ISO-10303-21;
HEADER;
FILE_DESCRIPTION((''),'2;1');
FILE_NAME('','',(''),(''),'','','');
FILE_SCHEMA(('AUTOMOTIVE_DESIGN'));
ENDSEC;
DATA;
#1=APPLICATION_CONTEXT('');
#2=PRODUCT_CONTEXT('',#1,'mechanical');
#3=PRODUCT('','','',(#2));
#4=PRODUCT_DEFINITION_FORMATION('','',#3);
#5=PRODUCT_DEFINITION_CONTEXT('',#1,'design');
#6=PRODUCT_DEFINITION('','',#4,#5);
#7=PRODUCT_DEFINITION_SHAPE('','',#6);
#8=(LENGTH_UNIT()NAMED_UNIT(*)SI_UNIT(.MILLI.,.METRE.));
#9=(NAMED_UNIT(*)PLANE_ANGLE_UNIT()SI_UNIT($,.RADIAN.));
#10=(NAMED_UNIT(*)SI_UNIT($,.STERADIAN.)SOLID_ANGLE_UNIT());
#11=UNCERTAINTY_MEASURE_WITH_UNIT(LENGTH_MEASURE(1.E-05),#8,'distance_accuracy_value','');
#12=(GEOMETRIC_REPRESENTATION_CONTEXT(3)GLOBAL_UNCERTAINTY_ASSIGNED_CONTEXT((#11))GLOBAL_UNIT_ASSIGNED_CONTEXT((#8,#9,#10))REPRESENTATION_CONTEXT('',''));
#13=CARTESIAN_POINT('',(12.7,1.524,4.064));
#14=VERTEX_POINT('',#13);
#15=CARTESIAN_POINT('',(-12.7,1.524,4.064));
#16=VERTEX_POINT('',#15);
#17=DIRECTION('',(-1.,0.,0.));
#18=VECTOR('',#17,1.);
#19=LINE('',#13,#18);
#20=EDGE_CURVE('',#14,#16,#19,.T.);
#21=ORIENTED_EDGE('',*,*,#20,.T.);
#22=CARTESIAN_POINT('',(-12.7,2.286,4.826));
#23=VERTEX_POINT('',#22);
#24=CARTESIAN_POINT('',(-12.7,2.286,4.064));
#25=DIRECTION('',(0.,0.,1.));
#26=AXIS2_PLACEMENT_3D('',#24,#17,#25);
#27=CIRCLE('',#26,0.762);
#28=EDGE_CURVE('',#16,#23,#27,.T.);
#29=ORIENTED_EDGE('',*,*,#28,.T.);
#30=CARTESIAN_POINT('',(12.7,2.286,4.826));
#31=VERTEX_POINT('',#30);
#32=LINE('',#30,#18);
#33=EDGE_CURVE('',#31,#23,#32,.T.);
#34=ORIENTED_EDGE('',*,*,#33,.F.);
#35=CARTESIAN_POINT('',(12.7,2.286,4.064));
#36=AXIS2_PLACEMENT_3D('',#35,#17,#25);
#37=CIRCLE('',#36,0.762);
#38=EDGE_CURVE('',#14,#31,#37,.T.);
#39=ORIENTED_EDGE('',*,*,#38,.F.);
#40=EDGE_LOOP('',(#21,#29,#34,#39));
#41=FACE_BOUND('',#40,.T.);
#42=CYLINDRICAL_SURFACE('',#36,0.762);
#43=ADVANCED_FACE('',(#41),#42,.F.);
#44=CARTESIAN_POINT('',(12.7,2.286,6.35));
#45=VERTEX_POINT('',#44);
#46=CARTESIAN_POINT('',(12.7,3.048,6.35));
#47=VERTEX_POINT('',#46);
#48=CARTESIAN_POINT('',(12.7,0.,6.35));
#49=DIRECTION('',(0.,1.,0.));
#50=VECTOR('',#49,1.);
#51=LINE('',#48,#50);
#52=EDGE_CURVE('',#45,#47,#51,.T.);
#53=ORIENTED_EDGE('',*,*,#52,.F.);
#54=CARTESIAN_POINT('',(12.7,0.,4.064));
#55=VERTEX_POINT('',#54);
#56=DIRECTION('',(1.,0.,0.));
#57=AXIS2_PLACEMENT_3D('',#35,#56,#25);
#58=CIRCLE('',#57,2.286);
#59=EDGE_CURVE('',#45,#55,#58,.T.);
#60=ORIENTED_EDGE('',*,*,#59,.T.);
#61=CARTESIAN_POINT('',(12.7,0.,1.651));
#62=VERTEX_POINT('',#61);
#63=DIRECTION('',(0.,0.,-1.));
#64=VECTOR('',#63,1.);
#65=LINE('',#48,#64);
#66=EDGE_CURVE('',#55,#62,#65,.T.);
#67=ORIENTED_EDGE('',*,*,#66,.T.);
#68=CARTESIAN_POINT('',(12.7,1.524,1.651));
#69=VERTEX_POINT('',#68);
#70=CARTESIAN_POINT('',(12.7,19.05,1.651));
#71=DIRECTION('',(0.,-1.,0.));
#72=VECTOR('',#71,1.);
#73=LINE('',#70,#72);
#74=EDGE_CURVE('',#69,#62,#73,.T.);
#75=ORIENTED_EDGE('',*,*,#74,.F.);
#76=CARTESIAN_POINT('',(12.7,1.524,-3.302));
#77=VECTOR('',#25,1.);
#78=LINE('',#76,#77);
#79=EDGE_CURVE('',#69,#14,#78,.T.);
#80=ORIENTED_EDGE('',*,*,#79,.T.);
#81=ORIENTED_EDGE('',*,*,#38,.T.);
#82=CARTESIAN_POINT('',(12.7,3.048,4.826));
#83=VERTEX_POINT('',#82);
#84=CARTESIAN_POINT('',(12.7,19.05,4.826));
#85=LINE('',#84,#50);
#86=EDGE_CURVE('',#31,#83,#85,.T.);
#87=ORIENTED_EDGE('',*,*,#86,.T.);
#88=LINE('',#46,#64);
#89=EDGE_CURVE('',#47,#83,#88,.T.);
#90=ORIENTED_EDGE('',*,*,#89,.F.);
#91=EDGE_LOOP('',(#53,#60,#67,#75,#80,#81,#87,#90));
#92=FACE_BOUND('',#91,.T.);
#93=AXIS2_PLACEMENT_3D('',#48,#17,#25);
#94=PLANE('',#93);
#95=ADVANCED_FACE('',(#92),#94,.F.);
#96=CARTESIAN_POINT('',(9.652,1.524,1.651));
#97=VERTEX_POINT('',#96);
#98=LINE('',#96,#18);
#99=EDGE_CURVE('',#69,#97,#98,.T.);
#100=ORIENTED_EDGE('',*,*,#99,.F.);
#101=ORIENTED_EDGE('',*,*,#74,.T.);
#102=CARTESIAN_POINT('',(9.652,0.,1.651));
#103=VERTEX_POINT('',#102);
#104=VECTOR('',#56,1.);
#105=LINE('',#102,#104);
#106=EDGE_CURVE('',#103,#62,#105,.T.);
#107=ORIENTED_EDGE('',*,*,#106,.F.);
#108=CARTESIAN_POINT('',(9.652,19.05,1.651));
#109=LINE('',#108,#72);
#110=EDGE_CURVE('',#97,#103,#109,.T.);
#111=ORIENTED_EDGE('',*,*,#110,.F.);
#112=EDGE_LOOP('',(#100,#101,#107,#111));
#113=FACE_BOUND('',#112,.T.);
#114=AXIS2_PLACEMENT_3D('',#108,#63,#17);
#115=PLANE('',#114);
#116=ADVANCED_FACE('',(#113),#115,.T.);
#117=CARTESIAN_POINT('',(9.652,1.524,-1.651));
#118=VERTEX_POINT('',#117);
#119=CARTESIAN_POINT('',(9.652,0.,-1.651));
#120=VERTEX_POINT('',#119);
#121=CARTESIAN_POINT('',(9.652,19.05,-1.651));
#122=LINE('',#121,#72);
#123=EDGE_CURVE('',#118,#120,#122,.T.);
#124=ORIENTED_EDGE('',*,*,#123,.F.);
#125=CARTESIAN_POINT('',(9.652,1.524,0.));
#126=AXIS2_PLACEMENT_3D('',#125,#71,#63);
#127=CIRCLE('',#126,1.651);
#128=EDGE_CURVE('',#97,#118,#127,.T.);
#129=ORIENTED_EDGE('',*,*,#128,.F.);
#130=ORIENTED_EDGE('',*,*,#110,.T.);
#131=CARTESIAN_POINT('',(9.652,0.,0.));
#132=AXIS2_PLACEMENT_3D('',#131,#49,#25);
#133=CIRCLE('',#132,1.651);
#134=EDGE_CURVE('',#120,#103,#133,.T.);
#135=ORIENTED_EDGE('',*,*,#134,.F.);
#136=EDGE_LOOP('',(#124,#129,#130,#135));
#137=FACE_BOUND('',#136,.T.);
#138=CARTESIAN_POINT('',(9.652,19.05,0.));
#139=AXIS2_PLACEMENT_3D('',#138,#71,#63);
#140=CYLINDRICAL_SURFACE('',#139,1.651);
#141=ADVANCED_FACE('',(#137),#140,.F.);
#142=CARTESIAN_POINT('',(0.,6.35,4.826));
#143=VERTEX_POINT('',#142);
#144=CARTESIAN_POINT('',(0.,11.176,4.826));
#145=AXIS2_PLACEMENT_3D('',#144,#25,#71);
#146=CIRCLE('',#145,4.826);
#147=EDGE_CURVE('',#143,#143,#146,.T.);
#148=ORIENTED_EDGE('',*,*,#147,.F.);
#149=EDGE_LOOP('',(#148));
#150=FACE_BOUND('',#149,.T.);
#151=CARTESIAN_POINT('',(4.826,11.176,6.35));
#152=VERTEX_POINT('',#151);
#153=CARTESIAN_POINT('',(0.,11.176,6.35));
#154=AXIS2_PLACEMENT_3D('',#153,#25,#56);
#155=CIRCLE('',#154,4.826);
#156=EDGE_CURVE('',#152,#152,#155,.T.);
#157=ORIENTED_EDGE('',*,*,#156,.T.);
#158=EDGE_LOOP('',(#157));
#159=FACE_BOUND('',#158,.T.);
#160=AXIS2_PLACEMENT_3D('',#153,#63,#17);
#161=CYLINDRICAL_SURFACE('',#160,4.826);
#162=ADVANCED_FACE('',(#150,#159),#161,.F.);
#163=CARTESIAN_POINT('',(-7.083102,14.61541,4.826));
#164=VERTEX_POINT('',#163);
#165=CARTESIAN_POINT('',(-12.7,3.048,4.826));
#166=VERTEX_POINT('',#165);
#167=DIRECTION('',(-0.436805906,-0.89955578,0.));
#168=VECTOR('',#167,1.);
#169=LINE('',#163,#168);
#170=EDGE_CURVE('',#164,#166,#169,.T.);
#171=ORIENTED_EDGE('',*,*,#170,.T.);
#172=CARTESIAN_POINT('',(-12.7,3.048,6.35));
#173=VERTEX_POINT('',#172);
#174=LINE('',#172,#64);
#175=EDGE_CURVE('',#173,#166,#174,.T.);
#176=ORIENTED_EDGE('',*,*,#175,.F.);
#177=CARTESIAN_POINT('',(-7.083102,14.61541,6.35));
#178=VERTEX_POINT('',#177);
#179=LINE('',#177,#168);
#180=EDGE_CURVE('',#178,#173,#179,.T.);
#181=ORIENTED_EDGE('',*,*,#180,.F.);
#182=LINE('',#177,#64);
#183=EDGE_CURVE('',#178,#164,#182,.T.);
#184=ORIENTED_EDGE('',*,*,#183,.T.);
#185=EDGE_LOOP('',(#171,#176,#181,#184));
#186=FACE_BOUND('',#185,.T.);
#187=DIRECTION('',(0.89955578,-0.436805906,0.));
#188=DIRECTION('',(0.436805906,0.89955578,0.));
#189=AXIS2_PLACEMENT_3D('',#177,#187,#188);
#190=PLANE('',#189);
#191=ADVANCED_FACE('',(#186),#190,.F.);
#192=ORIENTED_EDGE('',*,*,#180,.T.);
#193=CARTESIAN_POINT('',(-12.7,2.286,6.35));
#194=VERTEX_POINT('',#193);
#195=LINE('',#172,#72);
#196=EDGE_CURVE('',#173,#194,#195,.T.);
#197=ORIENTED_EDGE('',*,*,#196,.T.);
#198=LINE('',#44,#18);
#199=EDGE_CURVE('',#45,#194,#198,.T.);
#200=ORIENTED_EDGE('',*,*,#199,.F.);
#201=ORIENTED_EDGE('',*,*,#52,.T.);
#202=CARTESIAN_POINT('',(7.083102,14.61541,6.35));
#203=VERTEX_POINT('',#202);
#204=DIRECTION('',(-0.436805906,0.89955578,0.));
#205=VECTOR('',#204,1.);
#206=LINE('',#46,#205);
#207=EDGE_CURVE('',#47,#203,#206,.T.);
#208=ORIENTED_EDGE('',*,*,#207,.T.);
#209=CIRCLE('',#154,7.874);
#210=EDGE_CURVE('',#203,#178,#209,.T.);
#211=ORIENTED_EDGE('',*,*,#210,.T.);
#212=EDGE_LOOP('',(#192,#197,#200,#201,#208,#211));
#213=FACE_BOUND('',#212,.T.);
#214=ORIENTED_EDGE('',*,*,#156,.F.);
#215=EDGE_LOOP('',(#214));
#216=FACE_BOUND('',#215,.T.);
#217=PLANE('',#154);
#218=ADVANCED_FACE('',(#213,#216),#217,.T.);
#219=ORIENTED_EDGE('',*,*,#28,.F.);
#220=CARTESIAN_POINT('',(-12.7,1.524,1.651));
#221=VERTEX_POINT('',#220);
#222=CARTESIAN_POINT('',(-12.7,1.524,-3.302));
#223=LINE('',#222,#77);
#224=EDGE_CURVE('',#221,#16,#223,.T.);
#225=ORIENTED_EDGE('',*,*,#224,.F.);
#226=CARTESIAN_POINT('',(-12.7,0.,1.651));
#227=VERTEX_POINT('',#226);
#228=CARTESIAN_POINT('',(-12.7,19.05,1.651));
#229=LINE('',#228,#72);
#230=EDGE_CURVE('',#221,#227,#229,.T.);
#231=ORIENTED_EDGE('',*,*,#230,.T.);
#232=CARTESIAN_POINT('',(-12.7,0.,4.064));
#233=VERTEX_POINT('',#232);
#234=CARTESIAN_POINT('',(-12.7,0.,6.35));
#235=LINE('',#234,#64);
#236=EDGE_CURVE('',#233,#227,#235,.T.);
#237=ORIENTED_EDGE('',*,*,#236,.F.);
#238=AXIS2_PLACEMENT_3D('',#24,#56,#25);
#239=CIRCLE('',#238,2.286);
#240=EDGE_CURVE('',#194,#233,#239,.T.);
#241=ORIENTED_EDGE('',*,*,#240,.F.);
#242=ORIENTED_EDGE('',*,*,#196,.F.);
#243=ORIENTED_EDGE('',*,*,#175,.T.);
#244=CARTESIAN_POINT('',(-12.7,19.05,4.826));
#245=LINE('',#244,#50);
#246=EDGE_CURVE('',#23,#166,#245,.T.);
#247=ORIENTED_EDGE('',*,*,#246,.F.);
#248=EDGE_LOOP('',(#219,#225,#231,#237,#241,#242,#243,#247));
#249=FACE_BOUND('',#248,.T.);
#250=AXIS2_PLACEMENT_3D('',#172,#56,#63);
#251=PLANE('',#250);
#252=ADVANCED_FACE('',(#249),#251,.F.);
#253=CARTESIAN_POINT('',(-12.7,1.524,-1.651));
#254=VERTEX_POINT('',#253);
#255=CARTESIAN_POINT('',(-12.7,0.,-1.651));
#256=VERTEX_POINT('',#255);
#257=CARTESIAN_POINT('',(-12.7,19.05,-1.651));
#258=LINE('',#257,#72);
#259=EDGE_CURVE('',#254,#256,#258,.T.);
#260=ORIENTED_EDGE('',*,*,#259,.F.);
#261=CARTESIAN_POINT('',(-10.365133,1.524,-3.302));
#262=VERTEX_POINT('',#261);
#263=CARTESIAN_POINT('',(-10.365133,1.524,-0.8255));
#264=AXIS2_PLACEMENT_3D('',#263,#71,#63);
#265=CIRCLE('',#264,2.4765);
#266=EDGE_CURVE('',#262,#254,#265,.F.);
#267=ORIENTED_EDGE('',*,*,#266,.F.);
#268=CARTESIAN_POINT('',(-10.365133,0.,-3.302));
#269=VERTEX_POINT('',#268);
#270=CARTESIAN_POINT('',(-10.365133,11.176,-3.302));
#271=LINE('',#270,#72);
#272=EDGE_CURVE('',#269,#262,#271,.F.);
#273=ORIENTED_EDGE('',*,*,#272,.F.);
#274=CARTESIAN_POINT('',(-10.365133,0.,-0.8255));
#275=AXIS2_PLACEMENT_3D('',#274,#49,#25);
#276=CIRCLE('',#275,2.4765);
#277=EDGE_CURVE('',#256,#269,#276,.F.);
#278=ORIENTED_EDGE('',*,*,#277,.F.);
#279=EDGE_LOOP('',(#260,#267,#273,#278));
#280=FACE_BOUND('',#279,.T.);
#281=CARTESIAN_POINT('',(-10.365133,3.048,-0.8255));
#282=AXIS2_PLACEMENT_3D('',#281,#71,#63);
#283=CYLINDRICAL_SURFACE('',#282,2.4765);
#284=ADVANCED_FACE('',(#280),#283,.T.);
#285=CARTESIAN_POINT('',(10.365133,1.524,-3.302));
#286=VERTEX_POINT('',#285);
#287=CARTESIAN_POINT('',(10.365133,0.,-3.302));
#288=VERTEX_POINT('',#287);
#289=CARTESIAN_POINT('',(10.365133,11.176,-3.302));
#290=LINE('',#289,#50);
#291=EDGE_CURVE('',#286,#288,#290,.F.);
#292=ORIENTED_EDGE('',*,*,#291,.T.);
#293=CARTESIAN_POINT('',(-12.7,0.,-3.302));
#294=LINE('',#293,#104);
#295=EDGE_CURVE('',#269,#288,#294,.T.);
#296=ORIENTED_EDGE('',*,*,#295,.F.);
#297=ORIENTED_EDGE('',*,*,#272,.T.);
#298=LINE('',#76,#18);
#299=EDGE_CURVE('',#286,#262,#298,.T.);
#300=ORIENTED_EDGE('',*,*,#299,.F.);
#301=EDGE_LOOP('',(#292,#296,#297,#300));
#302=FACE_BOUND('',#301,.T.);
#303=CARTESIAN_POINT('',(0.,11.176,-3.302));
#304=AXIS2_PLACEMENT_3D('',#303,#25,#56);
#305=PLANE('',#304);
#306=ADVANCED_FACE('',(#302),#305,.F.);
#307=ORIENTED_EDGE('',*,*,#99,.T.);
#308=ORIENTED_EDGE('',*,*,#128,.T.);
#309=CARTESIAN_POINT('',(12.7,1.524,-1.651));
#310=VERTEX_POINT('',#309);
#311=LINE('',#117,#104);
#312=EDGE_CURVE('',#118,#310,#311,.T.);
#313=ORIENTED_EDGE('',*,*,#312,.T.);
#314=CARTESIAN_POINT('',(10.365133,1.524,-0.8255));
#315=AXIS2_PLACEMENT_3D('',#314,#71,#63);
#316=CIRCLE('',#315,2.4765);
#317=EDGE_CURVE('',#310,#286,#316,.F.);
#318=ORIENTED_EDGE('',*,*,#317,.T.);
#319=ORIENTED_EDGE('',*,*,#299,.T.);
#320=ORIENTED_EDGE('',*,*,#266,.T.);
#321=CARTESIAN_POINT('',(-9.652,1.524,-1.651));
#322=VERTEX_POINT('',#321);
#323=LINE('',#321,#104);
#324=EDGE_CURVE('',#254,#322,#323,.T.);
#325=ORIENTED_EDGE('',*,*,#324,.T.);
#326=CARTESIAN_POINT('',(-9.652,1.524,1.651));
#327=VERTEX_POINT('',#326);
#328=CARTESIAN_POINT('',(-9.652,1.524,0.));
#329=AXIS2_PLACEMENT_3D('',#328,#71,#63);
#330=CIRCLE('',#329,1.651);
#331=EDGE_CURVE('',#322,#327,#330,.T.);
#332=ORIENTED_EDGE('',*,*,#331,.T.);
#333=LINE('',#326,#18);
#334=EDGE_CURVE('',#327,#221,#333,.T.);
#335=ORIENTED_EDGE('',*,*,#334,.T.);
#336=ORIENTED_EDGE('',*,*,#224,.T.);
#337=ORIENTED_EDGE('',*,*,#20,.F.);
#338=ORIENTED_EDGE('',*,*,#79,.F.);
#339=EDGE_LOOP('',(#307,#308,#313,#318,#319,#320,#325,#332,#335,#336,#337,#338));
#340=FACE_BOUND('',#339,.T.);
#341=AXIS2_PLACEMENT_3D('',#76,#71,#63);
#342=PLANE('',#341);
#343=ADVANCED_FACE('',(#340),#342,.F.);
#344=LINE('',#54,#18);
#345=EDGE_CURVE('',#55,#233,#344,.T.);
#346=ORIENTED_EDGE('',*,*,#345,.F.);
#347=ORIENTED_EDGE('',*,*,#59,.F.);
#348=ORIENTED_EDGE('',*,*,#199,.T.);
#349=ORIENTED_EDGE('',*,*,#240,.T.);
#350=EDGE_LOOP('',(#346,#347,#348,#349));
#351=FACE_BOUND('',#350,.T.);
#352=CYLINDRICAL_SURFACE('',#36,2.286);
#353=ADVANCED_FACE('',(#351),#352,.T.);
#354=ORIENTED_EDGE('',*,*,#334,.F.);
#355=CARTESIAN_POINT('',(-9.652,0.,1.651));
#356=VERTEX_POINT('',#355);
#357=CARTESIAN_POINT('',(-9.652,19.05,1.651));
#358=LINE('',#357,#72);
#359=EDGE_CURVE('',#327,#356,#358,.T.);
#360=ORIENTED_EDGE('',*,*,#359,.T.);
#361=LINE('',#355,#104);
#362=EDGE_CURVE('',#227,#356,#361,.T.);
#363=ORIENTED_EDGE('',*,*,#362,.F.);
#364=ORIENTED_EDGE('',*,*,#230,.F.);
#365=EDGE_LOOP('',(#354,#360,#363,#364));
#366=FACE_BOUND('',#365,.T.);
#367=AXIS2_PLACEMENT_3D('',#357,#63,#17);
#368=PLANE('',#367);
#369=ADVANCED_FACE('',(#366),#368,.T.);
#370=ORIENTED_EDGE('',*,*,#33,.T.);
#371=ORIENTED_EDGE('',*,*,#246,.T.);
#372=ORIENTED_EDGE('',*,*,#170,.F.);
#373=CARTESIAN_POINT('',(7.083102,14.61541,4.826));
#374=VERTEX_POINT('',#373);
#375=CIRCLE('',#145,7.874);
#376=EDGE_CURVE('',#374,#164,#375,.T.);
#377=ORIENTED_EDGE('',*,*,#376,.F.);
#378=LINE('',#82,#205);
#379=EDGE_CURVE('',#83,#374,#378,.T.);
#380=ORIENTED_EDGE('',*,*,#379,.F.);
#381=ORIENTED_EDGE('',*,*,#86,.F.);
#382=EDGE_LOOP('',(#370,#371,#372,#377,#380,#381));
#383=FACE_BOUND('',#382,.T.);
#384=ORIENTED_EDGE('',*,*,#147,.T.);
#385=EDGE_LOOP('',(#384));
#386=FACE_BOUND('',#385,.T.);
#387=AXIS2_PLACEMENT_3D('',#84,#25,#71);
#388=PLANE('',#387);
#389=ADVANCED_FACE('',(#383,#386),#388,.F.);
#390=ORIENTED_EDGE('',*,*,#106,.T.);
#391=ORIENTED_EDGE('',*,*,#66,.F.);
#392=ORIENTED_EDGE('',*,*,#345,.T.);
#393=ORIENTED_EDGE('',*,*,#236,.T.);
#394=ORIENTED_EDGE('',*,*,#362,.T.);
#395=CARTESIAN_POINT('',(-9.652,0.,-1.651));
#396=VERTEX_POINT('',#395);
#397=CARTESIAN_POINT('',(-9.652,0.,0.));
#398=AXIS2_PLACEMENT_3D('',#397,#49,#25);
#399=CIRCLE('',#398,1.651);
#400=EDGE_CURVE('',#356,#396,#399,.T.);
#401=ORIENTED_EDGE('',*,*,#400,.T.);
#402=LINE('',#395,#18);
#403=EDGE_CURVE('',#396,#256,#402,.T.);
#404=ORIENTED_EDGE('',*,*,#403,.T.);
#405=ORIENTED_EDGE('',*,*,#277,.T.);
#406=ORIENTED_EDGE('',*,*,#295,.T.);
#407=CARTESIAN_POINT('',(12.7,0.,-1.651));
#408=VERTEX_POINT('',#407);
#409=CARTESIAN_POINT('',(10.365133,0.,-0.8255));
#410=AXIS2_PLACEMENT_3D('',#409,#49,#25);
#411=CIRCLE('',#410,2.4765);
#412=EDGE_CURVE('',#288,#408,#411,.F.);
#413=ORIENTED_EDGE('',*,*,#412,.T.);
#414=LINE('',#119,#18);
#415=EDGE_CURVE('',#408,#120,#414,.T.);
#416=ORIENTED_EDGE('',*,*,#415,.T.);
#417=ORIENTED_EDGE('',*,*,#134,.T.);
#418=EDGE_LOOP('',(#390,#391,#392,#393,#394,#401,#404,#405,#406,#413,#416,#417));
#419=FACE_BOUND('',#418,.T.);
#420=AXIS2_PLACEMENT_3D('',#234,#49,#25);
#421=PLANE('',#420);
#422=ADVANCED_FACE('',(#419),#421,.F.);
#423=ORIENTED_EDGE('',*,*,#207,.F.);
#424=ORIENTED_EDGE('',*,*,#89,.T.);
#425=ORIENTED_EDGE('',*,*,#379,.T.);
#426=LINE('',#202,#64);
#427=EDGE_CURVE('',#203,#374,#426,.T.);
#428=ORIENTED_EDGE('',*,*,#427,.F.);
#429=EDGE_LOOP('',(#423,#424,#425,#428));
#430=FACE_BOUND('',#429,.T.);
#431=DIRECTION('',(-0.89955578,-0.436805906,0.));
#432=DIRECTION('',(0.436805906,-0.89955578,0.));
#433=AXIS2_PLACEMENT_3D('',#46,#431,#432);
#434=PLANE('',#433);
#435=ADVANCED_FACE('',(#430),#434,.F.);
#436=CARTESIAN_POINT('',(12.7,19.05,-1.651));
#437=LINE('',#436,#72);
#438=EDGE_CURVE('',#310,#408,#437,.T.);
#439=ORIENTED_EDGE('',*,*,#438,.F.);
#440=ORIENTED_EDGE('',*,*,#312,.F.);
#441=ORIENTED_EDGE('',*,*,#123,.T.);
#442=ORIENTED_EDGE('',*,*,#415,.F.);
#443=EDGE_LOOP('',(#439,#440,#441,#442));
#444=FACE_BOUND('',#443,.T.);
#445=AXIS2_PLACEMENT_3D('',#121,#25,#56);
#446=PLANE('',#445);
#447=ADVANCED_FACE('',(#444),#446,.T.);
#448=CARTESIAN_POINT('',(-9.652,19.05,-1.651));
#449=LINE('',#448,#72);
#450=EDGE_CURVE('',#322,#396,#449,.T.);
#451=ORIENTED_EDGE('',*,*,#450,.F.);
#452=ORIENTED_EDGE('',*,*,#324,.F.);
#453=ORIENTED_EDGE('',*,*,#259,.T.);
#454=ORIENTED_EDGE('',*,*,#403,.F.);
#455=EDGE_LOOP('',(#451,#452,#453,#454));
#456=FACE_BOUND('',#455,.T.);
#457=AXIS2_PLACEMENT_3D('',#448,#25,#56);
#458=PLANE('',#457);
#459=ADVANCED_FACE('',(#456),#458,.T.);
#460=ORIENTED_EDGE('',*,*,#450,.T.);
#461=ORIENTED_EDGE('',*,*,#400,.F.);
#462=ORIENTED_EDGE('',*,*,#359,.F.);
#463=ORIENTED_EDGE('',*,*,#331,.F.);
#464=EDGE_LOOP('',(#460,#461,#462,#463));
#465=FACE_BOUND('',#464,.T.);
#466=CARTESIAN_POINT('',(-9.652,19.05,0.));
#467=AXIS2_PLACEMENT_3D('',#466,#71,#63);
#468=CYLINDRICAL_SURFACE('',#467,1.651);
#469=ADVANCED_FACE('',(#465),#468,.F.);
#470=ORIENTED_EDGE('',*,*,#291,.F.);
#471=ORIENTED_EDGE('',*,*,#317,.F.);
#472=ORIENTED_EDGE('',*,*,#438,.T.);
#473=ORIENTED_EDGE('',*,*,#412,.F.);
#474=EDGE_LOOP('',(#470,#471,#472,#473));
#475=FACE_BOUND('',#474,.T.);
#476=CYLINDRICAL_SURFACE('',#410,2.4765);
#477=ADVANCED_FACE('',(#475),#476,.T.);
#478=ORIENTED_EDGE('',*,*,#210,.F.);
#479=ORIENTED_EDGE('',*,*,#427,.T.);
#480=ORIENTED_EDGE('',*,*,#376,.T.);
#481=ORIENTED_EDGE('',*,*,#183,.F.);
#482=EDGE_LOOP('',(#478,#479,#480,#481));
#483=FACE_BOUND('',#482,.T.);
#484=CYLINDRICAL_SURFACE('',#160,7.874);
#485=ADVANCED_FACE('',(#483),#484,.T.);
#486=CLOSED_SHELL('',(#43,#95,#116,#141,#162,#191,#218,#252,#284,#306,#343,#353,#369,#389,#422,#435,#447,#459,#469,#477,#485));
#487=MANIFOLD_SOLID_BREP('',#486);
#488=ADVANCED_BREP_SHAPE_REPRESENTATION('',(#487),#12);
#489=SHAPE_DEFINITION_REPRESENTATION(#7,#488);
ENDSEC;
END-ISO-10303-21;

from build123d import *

# Parameters (mm, degrees)
BOSS_EXTRUDE1_DEPTH      = 6.35
BOSS_EXTRUDE1_DEPTH_BACK = 3.302
SKETCH3_R                = 4.826
CUT_EXTRUDE1_DEPTH       = 24.759524406
CUT_EXTRUDE2_DEPTH       = 33.378773911
FILLET1_R                = 2.4765


with BuildPart() as part:
    # Sketch3 → Boss-Extrude1 (new, two sides: drawn at the far end of the back side and taken through both)
    with BuildSketch(Plane.XY.offset(-BOSS_EXTRUDE1_DEPTH_BACK)):
        with BuildLine():
            Line((-12.7, 0), (12.7, 0))
            Line((12.7, 0), (12.7, 3.048))
            Line((12.7, 3.048), (7.083102209, 14.615409702))
            ThreePointArc((7.083102209, 14.615409702), (0, 19.05), (-7.083102209, 14.615409702))
            Line((-7.083102209, 14.615409702), (-12.7, 3.048))
            Line((-12.7, 3.048), (-12.7, 0))
        make_face()
        with Locations((0, 11.176)):
            Circle(SKETCH3_R, mode=Mode.SUBTRACT)
    extrude(amount=BOSS_EXTRUDE1_DEPTH + BOSS_EXTRUDE1_DEPTH_BACK)

    # Sketch4 → Cut-Extrude1 (cut, through all)
    with BuildSketch(Plane(origin=(0, 0, 0), x_dir=(1, 0, 0), z_dir=(0, 1, 0))):
        with BuildLine():
            Line((-12.7, 1.651), (-12.7, -1.651))
            Line((-12.7, -1.651), (-9.652, -1.651))
            ThreePointArc((-9.652, -1.651), (-8.001, 0), (-9.652, 1.651))
            Line((-9.652, 1.651), (-12.7, 1.651))
        make_face()
        with BuildLine():
            Line((9.652, 1.651), (12.7, 1.651))
            Line((12.7, 1.651), (12.7, -1.651))
            Line((12.7, -1.651), (9.652, -1.651))
            ThreePointArc((9.652, -1.651), (8.001, 0), (9.652, 1.651))
        make_face()
    extrude(amount=CUT_EXTRUDE1_DEPTH, mode=Mode.SUBTRACT)

    # Sketch5 → Cut-Extrude2 (cut, through all)
    with BuildSketch(Plane.ZY.offset(12.7)):
        with BuildLine():
            Line((-3.302, 19.05), (4.826, 19.05))
            Line((4.826, 19.05), (4.826, 2.286))
            ThreePointArc((4.826, 2.286), (4.602815367, 1.747184633), (4.064, 1.524))
            Line((4.064, 1.524), (-3.302, 1.524))
            Line((-3.302, 1.524), (-3.302, 19.05))
        make_face()
        with BuildLine():
            Line((4.064, 0), (6.35, 0))
            Line((6.35, 0), (6.35, 2.286))
            ThreePointArc((6.35, 2.286), (5.680446102, 0.669553898), (4.064, 0))
        make_face()
    extrude(amount=-CUT_EXTRUDE2_DEPTH, mode=Mode.SUBTRACT)

    # Fillet1
    # the kernel refuses this fillet: 2.4765 mm, written as the material it takes off along each edge
    with BuildSketch(Plane(origin=(-12.7, 7.361166479, -3.302), x_dir=(1, 0, 0), z_dir=(0, -1, 0))) as fillet1_piece_1:
        with BuildLine():
            CenterArc((2.334866591, 2.4765), FILLET1_R, 199.471220634, 70.528779366)
            Line((0, 1.651), (-0.046697332, 1.63449))
            ThreePointArc((-0.046697332, 1.63449), (-0.04953, 0.8255), (-0.04953, 0))
            Line((-0.04953, 0), (0, -0.04953))
            Line((0, -0.04953), (2.334866591, -0.04953))
            Line((2.334866591, -0.04953), (2.334866591, 0))
        make_face()
    extrude(amount=13.198332957, mode=Mode.SUBTRACT)
    with BuildSketch(Plane(origin=(12.7, -5.837166479, -3.302), x_dir=(0, 0, 1), z_dir=(0, 1, 0))) as fillet1_piece_2:
        with BuildLine():
            CenterArc((2.4765, -2.334866591), FILLET1_R, 109.471220634, 70.528779366)
            Line((0, -2.334866591), (-0.04953, -2.334866591))
            Line((-0.04953, -2.334866591), (-0.04953, 0))
            Line((-0.04953, 0), (0, 0.04953))
            ThreePointArc((0, 0.04953), (0.8255, 0.04953), (1.63449, 0.046697332))
            Line((1.63449, 0.046697332), (1.651, 0))
        make_face()
    extrude(amount=13.198332957, mode=Mode.SUBTRACT)


solid = part.part
